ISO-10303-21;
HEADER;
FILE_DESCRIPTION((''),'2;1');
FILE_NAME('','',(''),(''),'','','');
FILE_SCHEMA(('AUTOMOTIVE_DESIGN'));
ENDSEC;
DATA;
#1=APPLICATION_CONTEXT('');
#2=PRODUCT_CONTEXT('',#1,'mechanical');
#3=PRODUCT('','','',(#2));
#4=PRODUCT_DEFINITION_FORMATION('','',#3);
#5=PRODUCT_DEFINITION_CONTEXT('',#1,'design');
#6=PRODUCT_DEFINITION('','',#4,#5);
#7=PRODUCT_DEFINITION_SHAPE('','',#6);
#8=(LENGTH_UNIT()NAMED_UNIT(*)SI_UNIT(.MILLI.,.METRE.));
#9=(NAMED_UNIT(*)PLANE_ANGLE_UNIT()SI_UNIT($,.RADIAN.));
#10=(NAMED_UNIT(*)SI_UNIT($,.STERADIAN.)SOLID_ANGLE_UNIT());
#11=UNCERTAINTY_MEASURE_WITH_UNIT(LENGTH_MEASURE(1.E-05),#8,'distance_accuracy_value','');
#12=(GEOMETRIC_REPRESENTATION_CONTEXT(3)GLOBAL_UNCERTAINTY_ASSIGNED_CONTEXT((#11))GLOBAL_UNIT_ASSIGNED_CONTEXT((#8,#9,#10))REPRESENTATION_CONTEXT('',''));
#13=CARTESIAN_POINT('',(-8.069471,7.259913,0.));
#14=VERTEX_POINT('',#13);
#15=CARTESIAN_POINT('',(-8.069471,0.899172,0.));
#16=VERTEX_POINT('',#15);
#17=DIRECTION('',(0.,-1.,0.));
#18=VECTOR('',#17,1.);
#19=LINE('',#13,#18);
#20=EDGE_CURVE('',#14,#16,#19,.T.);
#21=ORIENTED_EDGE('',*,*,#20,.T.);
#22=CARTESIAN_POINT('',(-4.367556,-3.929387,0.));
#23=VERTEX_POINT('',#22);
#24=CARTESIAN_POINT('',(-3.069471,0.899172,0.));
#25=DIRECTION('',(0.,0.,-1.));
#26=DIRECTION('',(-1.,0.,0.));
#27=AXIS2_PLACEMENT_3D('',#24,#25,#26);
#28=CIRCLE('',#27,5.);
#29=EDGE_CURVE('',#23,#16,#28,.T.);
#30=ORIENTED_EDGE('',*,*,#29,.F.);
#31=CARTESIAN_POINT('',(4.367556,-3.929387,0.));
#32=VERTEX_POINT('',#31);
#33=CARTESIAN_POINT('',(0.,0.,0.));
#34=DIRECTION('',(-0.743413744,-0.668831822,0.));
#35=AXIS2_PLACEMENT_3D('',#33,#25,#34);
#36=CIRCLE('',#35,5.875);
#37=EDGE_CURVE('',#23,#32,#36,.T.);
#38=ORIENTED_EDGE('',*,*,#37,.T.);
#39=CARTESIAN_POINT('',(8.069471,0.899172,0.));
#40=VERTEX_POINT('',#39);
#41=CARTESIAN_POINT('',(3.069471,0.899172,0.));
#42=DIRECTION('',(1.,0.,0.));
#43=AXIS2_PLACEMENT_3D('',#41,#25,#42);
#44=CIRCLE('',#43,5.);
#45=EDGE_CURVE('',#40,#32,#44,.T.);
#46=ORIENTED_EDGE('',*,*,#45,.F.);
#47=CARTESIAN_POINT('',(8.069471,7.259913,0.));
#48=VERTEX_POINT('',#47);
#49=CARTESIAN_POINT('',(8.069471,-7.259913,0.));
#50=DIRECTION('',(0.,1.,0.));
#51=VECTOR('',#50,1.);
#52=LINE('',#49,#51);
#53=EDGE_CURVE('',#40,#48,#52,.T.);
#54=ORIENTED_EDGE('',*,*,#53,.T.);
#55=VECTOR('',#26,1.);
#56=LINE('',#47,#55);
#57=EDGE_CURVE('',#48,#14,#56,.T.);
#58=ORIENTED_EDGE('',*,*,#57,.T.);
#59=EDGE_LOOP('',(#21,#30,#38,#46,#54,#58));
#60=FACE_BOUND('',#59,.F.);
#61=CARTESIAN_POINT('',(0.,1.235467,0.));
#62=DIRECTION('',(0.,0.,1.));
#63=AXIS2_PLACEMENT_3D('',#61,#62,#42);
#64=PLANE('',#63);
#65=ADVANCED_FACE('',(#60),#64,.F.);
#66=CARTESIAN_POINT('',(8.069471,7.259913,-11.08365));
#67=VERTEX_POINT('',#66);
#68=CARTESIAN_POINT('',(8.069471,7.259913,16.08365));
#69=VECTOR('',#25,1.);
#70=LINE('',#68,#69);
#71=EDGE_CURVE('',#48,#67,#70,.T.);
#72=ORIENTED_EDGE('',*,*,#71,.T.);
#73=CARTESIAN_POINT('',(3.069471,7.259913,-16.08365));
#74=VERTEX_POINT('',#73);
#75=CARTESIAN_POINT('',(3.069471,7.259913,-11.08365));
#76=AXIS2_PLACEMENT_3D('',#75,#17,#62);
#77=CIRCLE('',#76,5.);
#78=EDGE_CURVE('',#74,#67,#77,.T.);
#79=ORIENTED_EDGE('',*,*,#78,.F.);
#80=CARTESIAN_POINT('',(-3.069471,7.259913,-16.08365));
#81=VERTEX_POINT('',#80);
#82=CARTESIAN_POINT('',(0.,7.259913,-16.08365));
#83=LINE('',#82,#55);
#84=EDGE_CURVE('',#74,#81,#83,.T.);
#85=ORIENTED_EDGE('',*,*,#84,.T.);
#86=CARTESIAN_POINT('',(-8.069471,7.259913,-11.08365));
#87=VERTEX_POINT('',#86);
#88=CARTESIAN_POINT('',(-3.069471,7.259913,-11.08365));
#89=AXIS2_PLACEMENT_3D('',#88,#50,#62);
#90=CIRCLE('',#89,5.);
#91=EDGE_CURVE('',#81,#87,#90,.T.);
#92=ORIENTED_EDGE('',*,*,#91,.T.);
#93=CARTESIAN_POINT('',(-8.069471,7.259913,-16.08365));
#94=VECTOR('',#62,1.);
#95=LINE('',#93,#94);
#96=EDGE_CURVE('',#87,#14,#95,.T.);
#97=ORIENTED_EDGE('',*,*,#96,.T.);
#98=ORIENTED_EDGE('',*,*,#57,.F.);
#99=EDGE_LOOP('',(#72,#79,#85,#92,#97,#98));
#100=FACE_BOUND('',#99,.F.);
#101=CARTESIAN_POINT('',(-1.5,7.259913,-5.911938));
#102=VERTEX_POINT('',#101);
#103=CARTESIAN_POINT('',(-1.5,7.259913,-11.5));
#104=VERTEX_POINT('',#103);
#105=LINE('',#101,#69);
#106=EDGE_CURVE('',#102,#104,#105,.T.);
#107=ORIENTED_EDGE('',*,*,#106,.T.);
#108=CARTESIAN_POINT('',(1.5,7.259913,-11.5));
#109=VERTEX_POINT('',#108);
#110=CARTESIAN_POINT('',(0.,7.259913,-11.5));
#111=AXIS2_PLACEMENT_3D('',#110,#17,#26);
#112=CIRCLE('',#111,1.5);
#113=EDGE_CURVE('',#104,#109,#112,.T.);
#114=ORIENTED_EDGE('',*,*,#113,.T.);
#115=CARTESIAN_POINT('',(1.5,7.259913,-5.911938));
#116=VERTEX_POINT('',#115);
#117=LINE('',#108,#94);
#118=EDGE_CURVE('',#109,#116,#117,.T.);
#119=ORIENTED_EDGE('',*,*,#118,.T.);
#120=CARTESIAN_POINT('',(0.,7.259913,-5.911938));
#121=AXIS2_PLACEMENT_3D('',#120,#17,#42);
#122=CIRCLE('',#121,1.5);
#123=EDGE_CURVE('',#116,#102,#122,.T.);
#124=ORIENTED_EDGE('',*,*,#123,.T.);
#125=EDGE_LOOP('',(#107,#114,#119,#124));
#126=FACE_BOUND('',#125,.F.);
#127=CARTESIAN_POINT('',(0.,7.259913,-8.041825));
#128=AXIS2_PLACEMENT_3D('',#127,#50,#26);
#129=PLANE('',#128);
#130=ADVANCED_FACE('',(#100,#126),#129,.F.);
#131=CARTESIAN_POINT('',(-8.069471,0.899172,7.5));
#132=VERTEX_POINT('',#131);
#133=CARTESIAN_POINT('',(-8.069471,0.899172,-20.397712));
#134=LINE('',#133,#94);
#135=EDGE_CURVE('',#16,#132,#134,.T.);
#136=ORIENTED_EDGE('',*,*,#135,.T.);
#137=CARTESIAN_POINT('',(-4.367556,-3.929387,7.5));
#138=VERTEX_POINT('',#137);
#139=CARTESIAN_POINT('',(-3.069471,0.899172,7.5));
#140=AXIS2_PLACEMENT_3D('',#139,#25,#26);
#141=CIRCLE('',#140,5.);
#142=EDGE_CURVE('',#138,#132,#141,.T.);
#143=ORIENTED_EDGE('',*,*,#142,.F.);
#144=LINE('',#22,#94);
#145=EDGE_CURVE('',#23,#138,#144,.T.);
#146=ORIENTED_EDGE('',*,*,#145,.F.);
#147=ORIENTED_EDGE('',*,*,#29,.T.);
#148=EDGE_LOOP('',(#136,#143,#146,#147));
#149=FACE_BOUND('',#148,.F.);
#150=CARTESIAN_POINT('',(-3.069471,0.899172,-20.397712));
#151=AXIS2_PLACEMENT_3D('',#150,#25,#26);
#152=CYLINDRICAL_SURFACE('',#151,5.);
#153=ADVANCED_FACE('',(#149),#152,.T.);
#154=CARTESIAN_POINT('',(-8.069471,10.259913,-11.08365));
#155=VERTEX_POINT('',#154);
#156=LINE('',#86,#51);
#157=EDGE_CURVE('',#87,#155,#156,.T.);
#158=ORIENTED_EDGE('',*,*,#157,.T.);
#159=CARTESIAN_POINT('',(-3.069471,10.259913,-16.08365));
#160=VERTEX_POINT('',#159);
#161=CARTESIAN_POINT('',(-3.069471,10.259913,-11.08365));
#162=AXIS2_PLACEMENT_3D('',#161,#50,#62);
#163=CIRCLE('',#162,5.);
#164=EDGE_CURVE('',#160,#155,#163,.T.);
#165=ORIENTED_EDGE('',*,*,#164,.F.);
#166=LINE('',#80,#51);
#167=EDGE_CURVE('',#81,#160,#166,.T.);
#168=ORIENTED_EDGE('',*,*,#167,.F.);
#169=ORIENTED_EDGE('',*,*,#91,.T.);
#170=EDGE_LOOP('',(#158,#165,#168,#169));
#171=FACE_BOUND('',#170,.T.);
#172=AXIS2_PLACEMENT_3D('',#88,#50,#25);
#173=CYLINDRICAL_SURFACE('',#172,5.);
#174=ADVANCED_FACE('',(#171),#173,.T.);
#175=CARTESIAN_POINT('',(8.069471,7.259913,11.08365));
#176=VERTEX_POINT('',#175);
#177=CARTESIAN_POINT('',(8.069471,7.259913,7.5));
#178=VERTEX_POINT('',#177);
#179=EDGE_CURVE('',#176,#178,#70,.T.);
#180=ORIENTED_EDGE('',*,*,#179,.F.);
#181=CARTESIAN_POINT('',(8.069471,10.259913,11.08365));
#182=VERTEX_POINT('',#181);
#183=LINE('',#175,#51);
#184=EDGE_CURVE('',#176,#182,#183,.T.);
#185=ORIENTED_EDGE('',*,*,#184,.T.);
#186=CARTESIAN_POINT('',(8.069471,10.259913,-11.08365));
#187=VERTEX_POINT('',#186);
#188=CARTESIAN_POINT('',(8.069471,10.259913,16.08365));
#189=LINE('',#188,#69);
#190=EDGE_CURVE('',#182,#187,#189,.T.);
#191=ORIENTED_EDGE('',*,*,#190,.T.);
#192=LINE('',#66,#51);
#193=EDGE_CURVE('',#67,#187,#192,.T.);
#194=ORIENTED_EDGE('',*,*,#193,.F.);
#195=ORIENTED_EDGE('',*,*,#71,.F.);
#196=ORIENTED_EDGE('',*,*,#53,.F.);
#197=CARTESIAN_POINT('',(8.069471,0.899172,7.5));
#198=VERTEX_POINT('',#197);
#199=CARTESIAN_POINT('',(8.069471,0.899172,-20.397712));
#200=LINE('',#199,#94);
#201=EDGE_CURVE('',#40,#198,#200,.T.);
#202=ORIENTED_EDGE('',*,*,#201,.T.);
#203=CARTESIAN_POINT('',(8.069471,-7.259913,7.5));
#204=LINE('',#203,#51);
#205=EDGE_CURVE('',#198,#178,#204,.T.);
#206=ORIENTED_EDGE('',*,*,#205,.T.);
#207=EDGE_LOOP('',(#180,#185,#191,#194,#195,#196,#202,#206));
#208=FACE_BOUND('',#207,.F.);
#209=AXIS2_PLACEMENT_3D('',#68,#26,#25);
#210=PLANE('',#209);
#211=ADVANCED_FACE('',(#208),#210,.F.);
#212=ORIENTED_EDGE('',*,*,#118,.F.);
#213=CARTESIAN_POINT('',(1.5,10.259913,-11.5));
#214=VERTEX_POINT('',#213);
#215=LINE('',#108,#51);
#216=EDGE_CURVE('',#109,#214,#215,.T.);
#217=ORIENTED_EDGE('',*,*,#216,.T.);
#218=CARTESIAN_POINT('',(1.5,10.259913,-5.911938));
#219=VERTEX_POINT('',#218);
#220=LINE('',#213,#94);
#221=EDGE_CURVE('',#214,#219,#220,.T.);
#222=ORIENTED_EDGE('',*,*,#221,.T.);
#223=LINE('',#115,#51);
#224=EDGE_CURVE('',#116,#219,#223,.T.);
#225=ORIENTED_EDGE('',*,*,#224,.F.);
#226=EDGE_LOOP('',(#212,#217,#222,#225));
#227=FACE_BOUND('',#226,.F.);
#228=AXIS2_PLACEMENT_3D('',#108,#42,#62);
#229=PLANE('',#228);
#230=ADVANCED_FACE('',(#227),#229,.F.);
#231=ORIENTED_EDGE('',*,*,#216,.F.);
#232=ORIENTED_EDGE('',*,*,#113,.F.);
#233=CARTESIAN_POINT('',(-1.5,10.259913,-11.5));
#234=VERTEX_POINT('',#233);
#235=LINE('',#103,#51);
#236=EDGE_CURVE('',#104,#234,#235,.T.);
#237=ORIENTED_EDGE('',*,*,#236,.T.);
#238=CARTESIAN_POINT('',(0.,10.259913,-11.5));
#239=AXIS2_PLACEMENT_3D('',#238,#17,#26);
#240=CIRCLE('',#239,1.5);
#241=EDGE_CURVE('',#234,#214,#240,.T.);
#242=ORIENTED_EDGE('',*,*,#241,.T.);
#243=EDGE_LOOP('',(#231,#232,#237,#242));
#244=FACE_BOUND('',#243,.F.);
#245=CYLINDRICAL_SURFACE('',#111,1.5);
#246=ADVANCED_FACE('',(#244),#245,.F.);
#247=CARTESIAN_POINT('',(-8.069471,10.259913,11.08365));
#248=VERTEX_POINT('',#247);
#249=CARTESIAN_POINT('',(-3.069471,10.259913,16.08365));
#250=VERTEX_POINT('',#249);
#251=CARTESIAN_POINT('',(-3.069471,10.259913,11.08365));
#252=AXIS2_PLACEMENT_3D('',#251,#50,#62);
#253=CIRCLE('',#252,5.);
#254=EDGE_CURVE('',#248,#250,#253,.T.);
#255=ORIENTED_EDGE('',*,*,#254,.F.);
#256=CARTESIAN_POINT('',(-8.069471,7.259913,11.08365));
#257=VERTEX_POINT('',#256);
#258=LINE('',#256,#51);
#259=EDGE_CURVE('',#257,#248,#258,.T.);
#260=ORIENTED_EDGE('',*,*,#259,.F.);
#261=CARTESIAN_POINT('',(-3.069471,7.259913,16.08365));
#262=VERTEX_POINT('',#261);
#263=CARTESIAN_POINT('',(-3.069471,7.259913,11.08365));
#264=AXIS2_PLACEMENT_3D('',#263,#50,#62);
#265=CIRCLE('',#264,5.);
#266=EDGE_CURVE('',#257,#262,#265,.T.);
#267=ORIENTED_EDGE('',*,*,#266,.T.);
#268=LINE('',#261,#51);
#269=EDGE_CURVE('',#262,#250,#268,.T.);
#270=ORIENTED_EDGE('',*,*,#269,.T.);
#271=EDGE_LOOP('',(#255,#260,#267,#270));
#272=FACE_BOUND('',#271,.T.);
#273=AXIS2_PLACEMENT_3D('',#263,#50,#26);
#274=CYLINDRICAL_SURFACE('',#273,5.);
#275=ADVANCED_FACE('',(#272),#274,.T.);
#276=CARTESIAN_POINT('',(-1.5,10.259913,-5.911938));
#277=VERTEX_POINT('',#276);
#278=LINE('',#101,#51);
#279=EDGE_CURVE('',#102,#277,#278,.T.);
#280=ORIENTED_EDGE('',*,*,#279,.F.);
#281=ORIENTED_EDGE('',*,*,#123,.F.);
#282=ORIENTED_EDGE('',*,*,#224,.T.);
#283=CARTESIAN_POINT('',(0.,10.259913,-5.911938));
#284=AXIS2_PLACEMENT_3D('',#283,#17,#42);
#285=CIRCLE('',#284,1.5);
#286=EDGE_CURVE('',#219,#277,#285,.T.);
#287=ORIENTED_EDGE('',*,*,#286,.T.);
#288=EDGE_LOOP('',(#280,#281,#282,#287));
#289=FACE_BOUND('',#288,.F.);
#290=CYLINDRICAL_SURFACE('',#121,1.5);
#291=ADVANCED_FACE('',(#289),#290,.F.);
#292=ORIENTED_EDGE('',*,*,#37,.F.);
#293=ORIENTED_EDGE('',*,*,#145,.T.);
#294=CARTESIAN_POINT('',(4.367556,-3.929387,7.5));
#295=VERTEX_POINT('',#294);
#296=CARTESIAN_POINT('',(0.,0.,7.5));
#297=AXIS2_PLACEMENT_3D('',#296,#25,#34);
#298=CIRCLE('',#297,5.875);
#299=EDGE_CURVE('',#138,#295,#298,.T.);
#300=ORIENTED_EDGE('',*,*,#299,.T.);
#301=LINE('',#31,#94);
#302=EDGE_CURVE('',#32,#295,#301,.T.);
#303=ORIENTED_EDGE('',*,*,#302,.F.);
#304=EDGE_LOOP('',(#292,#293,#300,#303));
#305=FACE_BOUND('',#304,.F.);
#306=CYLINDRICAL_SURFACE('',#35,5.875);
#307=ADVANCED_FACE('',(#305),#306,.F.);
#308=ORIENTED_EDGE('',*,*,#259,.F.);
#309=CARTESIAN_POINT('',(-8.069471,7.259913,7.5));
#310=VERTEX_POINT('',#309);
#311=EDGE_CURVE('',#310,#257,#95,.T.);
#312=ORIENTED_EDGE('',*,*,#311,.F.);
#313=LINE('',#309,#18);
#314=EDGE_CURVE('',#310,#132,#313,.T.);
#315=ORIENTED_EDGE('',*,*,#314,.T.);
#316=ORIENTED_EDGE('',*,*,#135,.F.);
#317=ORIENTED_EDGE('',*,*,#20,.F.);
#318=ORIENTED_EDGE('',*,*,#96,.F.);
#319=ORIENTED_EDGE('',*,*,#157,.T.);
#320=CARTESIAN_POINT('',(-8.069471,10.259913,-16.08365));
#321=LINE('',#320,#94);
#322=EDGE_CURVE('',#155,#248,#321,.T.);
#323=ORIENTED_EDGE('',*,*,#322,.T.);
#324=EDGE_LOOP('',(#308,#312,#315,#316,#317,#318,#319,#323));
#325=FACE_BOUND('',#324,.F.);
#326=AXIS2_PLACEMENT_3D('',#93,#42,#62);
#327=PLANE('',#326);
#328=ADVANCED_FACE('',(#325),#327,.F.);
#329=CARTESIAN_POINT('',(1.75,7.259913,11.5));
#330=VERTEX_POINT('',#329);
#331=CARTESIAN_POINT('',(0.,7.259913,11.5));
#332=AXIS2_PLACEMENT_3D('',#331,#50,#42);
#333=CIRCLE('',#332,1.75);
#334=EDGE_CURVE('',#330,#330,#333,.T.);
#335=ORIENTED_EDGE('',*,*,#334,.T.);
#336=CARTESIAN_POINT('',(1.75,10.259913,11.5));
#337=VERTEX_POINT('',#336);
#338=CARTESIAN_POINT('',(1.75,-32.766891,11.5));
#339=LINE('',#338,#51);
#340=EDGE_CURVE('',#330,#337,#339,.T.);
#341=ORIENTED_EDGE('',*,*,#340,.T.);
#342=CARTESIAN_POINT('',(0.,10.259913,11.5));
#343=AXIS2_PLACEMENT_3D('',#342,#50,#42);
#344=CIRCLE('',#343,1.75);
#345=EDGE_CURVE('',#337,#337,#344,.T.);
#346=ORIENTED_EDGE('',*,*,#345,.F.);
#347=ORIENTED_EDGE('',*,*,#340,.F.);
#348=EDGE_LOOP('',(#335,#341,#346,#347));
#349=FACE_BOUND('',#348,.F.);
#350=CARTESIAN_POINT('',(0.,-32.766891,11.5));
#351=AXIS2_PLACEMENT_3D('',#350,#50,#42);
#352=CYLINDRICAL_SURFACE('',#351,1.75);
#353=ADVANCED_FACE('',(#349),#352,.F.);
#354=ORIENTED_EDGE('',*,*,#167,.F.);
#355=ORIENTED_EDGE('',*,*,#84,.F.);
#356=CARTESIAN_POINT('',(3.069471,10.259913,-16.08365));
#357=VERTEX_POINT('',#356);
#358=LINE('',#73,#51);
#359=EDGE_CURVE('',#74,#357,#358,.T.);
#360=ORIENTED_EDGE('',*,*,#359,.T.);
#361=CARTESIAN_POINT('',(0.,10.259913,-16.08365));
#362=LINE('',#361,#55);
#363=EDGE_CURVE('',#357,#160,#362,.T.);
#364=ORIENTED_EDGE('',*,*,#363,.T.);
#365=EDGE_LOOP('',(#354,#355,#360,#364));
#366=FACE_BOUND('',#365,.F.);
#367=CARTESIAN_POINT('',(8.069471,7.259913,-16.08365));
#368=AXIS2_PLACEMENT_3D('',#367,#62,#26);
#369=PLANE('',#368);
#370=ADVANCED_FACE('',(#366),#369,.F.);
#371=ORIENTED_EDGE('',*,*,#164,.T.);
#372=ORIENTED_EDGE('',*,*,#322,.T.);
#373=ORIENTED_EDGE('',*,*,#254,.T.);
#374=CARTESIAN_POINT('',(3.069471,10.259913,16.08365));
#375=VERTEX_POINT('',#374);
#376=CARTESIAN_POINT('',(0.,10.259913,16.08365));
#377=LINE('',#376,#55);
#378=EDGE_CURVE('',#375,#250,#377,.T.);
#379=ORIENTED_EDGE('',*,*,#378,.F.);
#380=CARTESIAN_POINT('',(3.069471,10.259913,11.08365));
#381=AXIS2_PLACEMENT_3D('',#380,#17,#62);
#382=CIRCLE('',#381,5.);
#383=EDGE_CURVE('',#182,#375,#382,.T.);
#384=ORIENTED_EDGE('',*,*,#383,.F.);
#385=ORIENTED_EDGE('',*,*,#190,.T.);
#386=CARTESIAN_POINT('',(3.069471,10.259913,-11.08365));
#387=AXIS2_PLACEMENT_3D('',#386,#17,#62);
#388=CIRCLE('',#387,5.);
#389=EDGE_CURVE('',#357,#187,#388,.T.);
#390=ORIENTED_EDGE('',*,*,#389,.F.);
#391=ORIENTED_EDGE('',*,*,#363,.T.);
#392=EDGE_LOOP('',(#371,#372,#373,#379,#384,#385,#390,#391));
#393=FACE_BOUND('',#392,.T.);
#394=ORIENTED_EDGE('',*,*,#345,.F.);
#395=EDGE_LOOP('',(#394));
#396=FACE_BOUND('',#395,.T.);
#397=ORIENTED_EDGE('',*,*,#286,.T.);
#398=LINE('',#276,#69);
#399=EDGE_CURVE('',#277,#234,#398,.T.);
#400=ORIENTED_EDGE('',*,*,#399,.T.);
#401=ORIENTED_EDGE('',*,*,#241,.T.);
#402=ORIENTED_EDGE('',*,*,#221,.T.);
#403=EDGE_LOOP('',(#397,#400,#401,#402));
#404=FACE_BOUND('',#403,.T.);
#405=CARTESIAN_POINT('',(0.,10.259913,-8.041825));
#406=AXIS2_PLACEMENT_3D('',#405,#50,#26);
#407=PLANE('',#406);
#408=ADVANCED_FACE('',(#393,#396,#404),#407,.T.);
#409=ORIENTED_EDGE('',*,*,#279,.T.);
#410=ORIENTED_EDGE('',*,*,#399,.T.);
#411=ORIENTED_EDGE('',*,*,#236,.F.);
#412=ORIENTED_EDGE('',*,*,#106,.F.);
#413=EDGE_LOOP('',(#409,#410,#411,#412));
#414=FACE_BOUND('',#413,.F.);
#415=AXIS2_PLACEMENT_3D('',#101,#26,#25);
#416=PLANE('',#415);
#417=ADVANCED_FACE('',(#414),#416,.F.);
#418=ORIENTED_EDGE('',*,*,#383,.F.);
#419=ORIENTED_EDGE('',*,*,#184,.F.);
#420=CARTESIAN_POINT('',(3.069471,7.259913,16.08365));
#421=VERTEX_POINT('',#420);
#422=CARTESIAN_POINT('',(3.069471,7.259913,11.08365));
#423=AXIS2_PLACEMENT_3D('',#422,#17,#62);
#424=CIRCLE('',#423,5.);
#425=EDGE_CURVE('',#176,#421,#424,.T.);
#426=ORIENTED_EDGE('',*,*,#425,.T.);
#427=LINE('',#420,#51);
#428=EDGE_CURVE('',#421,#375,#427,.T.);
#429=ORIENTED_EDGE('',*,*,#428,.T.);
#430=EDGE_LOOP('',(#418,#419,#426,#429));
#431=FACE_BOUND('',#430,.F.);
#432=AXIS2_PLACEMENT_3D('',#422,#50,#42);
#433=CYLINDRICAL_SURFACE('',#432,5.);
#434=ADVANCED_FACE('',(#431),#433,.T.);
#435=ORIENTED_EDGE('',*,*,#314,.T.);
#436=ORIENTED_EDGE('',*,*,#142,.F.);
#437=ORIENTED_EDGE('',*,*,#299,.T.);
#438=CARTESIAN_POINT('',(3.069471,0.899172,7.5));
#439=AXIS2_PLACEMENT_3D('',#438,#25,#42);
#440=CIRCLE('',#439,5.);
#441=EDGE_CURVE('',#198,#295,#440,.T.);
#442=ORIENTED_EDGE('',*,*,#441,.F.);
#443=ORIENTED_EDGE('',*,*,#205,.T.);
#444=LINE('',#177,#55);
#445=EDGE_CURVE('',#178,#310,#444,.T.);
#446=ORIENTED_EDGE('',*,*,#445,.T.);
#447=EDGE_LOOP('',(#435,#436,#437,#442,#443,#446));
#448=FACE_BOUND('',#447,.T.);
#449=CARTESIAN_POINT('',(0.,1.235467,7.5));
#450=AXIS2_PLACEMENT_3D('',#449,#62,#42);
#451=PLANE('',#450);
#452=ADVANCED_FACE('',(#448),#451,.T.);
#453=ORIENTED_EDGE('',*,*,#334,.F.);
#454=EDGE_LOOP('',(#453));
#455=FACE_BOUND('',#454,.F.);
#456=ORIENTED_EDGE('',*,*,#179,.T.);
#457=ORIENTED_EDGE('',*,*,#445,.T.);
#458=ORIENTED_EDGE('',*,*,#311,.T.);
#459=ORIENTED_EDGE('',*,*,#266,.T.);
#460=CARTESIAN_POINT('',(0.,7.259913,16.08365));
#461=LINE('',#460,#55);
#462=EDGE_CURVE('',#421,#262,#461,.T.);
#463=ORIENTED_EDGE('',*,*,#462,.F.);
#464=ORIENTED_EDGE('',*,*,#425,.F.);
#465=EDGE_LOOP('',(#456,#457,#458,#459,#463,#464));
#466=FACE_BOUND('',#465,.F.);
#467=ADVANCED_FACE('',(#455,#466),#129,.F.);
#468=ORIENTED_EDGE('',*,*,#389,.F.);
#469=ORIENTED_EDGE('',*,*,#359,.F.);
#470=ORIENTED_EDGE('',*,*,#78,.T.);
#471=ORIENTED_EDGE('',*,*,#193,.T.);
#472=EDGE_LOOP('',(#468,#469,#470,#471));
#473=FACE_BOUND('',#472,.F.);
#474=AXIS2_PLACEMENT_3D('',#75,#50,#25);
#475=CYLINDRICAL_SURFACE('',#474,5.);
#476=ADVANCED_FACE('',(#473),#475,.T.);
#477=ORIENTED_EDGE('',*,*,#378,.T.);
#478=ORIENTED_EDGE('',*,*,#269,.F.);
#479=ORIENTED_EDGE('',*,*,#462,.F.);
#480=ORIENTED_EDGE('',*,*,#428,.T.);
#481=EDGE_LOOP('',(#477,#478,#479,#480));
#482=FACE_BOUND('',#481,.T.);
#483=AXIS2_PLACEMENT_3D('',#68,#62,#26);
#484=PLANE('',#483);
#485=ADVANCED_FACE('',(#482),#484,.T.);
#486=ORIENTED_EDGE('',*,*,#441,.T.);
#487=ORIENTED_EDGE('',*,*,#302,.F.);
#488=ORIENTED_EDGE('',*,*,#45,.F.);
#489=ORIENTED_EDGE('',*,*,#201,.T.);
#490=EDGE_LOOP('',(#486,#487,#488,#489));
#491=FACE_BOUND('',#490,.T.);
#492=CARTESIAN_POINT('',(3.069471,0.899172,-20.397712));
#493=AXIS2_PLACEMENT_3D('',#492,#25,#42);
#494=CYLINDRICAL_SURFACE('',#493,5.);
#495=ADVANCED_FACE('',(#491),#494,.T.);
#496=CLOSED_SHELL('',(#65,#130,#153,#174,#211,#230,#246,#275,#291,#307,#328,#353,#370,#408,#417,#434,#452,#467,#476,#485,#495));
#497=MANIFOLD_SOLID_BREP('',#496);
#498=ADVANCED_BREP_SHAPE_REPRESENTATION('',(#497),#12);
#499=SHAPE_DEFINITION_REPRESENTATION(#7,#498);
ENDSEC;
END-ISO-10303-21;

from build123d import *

# Parameters (mm, degrees)
F1_DEPTH    = 7.5
F2_W        = 16.1389429122
F2_H        = 16.083650291
F3_DEPTH    = 3
F4_D        = 3.5
F5_T1_DEPTH = 48.2954240112
F6_R        = 5


# Not quite as in the source:
# - a fillet or chamfer that OpenCascade refuses, or shapes differently, is made with other operations: its cross-section is extruded or revolved along the edge and cut away or added


with BuildPart() as f1:
    # F0 (on Top) → F1 (new body)
    with BuildSketch(Plane.XY):
        with BuildLine():
            ThreePointArc((-4.3675557451, -3.9293869513), (0, 5.875), (4.3675557451, -3.9293869513))
            Line((4.3675557451, -3.9293869513), (8.0694714561, -7.2599132545))
            Line((8.0694714561, -7.2599132545), (8.0694714561, 7.2599132545))
            Line((8.0694714561, 7.2599132545), (-8.0694714561, 7.2599132545))
            Line((-8.0694714561, 7.2599132545), (-8.0694714561, -7.2599132545))
            Line((-8.0694714561, -7.2599132545), (-4.3675557451, -3.9293869513))
        make_face()
    extrude(amount=F1_DEPTH)

    # F2 (on face) → F3 (join)
    with BuildSketch(Plane(origin=(0, 7.2599132545, 0), x_dir=(-1, 0, 0), z_dir=(0, 1, 0))):
        with Locations((0, -8.0418251455)):
            Rectangle(F2_W, F2_H)
        with BuildLine():
            Line((1.5, -5.9119383805), (1.5, -11.5))
            ThreePointArc((1.5, -11.5), (0, -13), (-1.5, -11.5))
            Line((-1.5, -11.5), (-1.5, -5.9119383805))
            ThreePointArc((-1.5, -5.9119383805), (0, -4.4119383805), (1.5, -5.9119383805))
        make_face(mode=Mode.SUBTRACT)
        with Locations((0, 8.0418251455)):
            Rectangle(F2_W, F2_H)
    extrude(amount=F3_DEPTH)

    # F4 (through all)
    with Locations(Plane(origin=(0, 7.2599132545, 0), x_dir=(-1, 0, 0), z_dir=(0, -1, 0))):
        with Locations((0, -11.5)):
            Hole(F4_D / 2)

    # F5: fillet of radius 5 on 2 edges, made by hand

    # F5_s2 → F5_t1 (cut)
    with BuildSketch(Plane.XY.offset(-20.3977120056)):
        with BuildLine():
            ThreePointArc((-8.0694714561, 0.8991715477), (-7.0374949846, -2.1429969679), (-4.3675557451, -3.9293869513))
            Line((-4.3675557451, -3.9293869513), (-8.0694714561, -7.2599132545))
            Line((-8.0694714561, -7.2599132545), (-8.0694714561, 0.8991715477))
        make_face()
        with BuildLine():
            ThreePointArc((8.0694714561, 0.8991715477), (7.0374949846, -2.1429969679), (4.3675557451, -3.9293869513))
            Line((4.3675557451, -3.9293869513), (8.0694714561, -7.2599132545))
            Line((8.0694714561, -7.2599132545), (8.0694714561, 0.8991715477))
        make_face()
    extrude(amount=F5_T1_DEPTH, mode=Mode.SUBTRACT)

    # F6
    f6_edges = [f1.edges().sort_by_distance(p)[0] for p in [
        (-8.069471, 8.759913, 16.08365),
        (8.069471, 8.759913, 16.08365),
        (8.069471, 8.759913, -16.08365),
        (-8.069471, 8.759913, -16.08365),
    ]]
    fillet(f6_edges, radius=F6_R)


solid = f1.part
